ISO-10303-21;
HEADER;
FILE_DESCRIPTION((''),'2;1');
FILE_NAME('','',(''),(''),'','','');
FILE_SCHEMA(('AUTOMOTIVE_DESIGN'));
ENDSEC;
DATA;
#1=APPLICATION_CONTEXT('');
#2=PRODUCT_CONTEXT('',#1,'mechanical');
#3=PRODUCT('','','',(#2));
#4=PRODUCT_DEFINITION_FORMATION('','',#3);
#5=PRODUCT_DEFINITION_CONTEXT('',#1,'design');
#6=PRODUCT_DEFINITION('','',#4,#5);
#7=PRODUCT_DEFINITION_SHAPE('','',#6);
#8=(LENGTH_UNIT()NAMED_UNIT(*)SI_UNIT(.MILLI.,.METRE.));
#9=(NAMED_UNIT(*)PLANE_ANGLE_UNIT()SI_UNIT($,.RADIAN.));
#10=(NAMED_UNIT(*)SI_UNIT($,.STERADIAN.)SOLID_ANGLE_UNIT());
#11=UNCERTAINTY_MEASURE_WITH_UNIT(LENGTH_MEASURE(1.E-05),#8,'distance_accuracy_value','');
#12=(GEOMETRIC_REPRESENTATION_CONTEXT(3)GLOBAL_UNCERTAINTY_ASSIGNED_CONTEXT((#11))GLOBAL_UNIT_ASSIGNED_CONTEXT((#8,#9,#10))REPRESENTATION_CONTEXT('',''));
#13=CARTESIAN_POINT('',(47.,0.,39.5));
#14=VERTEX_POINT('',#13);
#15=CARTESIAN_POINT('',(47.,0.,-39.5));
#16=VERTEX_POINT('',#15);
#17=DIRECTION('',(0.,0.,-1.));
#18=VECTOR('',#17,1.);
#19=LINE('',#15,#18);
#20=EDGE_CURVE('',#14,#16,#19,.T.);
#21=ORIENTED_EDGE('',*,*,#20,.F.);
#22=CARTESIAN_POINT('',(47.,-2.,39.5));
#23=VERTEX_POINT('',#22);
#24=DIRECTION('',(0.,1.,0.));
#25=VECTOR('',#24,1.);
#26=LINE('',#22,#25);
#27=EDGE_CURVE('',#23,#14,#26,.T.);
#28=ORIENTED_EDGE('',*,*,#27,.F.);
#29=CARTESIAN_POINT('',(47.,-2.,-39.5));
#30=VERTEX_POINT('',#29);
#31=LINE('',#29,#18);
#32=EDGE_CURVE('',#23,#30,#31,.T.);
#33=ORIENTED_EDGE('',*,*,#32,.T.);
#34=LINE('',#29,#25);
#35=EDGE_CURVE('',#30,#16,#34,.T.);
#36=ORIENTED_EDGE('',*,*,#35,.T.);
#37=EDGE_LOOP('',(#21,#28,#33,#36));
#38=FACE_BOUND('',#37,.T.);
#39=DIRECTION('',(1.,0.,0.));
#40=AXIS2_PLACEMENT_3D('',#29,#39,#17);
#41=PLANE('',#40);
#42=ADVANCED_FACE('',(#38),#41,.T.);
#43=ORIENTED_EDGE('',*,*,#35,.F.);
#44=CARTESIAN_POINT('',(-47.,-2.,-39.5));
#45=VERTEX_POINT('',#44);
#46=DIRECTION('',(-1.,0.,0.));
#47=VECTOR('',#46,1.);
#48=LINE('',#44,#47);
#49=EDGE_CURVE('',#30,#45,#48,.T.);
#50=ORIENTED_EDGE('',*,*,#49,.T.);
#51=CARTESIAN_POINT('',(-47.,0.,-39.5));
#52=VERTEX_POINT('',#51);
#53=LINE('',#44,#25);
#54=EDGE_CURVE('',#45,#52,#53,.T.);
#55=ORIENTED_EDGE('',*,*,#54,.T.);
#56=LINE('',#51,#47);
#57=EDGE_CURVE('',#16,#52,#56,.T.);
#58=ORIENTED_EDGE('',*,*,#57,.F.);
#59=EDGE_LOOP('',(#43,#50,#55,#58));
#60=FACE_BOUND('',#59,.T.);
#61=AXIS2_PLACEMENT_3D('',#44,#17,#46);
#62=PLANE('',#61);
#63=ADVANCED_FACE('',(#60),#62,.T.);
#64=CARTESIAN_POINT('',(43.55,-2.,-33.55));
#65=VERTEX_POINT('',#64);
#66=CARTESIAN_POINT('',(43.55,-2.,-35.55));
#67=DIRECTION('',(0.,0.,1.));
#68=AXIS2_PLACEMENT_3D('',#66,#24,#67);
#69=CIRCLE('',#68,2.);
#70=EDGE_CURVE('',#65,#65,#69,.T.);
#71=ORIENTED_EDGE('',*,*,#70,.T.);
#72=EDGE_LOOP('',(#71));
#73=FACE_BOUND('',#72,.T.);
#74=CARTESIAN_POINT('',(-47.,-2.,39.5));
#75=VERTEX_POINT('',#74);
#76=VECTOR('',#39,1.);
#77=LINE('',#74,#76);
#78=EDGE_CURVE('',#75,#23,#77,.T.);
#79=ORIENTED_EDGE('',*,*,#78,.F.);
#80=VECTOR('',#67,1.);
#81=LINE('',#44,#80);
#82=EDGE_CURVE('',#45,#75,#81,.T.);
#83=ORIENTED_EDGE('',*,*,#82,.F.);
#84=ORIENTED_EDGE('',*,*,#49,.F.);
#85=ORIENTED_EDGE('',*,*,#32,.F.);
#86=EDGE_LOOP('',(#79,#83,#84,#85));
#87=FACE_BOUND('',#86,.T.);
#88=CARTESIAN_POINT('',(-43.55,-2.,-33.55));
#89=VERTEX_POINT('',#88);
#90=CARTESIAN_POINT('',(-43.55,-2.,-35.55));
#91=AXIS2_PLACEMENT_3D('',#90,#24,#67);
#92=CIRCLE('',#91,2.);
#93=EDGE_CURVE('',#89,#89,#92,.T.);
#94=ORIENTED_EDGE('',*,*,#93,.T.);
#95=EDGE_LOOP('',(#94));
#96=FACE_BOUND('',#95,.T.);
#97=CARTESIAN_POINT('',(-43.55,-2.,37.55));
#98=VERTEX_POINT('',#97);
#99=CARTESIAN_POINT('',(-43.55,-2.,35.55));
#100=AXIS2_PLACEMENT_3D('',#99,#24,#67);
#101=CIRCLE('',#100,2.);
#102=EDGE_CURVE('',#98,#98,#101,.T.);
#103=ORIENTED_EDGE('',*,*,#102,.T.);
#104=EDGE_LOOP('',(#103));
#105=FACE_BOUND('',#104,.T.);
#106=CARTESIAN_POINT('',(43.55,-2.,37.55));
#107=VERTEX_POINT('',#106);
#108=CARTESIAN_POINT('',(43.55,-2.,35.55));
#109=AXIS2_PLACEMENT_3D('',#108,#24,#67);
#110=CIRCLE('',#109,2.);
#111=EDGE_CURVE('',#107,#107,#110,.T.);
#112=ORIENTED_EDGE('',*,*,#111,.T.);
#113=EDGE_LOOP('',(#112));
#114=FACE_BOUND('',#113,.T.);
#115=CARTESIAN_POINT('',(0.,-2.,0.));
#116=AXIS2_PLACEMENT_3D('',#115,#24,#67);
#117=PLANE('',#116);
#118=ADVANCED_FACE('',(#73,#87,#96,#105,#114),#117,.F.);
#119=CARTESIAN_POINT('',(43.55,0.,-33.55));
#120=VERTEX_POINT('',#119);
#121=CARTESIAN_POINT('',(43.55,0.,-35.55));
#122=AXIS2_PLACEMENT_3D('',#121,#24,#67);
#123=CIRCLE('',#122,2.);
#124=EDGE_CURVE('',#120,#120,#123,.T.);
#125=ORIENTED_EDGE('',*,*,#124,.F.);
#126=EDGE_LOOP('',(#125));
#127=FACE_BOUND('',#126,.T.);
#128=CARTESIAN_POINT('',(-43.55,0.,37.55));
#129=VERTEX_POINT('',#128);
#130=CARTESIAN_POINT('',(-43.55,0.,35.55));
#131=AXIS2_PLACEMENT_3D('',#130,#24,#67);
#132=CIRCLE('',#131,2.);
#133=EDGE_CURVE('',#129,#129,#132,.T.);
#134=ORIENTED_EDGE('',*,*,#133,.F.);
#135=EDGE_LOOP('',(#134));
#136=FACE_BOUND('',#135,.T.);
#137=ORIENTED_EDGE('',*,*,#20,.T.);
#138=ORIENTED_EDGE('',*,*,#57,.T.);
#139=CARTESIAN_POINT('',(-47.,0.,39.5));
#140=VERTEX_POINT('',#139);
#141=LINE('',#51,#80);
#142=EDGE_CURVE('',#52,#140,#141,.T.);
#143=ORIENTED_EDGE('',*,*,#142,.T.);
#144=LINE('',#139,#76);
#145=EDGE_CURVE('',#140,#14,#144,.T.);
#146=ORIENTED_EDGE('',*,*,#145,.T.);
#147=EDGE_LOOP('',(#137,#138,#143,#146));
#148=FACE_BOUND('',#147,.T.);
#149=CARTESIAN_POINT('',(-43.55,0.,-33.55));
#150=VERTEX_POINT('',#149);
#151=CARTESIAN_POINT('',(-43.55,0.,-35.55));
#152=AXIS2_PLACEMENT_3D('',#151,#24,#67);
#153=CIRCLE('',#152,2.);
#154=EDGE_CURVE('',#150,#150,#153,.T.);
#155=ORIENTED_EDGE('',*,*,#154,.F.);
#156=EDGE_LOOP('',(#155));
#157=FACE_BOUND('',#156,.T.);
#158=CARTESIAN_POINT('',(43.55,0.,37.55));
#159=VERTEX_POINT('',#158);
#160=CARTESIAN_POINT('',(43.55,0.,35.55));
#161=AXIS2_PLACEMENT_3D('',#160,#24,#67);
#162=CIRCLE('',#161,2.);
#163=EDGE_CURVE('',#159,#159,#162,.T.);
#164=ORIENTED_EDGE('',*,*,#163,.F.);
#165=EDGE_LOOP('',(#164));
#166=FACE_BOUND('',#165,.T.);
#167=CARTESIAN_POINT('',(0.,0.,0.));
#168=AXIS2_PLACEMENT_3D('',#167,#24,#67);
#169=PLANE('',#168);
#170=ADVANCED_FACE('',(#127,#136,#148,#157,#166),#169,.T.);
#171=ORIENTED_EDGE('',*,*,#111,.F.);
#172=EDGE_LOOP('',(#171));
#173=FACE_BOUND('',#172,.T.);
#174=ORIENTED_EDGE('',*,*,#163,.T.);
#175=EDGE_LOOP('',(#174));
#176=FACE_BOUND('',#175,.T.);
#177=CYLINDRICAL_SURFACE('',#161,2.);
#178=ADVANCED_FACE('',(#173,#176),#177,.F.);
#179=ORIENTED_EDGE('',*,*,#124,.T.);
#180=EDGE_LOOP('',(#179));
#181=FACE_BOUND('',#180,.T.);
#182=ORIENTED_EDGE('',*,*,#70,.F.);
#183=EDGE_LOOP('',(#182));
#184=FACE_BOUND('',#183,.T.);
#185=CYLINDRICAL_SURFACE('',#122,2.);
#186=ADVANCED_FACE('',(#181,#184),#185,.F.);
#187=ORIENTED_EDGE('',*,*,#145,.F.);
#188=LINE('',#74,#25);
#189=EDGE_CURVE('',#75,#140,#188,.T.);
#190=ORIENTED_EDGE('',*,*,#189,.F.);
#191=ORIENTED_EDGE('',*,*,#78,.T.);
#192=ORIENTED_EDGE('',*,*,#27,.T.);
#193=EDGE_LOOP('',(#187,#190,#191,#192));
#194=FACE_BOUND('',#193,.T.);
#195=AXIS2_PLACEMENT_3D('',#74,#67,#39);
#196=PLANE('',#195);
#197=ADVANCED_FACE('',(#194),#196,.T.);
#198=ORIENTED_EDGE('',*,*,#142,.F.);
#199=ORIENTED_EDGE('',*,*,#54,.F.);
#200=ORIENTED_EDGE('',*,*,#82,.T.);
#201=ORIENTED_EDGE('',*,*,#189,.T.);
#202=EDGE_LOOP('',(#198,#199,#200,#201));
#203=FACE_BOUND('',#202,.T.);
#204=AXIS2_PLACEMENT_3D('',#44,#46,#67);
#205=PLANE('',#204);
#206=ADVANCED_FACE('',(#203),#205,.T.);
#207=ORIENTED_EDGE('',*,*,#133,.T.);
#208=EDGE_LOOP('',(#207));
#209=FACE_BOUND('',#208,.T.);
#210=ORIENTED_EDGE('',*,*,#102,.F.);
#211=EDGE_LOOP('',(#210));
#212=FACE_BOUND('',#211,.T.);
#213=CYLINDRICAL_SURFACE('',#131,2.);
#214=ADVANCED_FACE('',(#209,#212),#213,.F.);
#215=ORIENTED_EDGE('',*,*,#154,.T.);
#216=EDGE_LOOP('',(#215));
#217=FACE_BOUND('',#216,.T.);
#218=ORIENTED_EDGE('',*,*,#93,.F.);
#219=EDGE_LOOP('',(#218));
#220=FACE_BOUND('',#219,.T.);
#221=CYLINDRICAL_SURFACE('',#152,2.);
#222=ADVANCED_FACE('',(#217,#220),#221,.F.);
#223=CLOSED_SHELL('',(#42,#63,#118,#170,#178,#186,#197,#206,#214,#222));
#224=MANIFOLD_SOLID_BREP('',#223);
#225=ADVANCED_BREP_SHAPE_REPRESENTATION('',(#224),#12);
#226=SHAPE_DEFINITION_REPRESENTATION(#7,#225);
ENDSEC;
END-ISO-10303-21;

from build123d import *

# Parameters (mm, degrees)
SKETCH1_W                     = 94
SKETCH1_H                     = 79
BASE_FLANGE1_DEPTH            = 2
F_4_0MM_START                 = -2
F_4_0MM_DOWEL_HOLE1_OUTLINE_R = 2
F_4_0MM_DOWEL_HOLE1_DEPTH     = 2


# Read off the part's stored shape, not the designer's step: Ø4.0mm Dowel Hole1
# Sheet-metal steps are written as plain solids
with BuildPart() as part:
    # Sketch1 → Base-Flange1 (new body)
    with BuildSketch(Plane(origin=(0, 0, 0), x_dir=(1, 0, 0), z_dir=(0, 1, 0))):
        Rectangle(SKETCH1_W, SKETCH1_H)
    extrude(amount=-BASE_FLANGE1_DEPTH)

    # Ø4.0mm Dowel Hole1 outline → Ø4.0mm Dowel Hole1 (cut)
    with BuildSketch(Plane(origin=(0, 0, 0), x_dir=(1, 0, 0), z_dir=(0, 1, 0)).offset(F_4_0MM_START)):
        with Locations((43.55, 35.55)):
            Circle(F_4_0MM_DOWEL_HOLE1_OUTLINE_R)
        with Locations((-43.55, -35.55)):
            Circle(F_4_0MM_DOWEL_HOLE1_OUTLINE_R)
        with Locations((-43.55, 35.55)):
            Circle(F_4_0MM_DOWEL_HOLE1_OUTLINE_R)
        with Locations((43.55, -35.55)):
            Circle(F_4_0MM_DOWEL_HOLE1_OUTLINE_R)
    extrude(amount=F_4_0MM_DOWEL_HOLE1_DEPTH, mode=Mode.SUBTRACT)


solid = part.part
